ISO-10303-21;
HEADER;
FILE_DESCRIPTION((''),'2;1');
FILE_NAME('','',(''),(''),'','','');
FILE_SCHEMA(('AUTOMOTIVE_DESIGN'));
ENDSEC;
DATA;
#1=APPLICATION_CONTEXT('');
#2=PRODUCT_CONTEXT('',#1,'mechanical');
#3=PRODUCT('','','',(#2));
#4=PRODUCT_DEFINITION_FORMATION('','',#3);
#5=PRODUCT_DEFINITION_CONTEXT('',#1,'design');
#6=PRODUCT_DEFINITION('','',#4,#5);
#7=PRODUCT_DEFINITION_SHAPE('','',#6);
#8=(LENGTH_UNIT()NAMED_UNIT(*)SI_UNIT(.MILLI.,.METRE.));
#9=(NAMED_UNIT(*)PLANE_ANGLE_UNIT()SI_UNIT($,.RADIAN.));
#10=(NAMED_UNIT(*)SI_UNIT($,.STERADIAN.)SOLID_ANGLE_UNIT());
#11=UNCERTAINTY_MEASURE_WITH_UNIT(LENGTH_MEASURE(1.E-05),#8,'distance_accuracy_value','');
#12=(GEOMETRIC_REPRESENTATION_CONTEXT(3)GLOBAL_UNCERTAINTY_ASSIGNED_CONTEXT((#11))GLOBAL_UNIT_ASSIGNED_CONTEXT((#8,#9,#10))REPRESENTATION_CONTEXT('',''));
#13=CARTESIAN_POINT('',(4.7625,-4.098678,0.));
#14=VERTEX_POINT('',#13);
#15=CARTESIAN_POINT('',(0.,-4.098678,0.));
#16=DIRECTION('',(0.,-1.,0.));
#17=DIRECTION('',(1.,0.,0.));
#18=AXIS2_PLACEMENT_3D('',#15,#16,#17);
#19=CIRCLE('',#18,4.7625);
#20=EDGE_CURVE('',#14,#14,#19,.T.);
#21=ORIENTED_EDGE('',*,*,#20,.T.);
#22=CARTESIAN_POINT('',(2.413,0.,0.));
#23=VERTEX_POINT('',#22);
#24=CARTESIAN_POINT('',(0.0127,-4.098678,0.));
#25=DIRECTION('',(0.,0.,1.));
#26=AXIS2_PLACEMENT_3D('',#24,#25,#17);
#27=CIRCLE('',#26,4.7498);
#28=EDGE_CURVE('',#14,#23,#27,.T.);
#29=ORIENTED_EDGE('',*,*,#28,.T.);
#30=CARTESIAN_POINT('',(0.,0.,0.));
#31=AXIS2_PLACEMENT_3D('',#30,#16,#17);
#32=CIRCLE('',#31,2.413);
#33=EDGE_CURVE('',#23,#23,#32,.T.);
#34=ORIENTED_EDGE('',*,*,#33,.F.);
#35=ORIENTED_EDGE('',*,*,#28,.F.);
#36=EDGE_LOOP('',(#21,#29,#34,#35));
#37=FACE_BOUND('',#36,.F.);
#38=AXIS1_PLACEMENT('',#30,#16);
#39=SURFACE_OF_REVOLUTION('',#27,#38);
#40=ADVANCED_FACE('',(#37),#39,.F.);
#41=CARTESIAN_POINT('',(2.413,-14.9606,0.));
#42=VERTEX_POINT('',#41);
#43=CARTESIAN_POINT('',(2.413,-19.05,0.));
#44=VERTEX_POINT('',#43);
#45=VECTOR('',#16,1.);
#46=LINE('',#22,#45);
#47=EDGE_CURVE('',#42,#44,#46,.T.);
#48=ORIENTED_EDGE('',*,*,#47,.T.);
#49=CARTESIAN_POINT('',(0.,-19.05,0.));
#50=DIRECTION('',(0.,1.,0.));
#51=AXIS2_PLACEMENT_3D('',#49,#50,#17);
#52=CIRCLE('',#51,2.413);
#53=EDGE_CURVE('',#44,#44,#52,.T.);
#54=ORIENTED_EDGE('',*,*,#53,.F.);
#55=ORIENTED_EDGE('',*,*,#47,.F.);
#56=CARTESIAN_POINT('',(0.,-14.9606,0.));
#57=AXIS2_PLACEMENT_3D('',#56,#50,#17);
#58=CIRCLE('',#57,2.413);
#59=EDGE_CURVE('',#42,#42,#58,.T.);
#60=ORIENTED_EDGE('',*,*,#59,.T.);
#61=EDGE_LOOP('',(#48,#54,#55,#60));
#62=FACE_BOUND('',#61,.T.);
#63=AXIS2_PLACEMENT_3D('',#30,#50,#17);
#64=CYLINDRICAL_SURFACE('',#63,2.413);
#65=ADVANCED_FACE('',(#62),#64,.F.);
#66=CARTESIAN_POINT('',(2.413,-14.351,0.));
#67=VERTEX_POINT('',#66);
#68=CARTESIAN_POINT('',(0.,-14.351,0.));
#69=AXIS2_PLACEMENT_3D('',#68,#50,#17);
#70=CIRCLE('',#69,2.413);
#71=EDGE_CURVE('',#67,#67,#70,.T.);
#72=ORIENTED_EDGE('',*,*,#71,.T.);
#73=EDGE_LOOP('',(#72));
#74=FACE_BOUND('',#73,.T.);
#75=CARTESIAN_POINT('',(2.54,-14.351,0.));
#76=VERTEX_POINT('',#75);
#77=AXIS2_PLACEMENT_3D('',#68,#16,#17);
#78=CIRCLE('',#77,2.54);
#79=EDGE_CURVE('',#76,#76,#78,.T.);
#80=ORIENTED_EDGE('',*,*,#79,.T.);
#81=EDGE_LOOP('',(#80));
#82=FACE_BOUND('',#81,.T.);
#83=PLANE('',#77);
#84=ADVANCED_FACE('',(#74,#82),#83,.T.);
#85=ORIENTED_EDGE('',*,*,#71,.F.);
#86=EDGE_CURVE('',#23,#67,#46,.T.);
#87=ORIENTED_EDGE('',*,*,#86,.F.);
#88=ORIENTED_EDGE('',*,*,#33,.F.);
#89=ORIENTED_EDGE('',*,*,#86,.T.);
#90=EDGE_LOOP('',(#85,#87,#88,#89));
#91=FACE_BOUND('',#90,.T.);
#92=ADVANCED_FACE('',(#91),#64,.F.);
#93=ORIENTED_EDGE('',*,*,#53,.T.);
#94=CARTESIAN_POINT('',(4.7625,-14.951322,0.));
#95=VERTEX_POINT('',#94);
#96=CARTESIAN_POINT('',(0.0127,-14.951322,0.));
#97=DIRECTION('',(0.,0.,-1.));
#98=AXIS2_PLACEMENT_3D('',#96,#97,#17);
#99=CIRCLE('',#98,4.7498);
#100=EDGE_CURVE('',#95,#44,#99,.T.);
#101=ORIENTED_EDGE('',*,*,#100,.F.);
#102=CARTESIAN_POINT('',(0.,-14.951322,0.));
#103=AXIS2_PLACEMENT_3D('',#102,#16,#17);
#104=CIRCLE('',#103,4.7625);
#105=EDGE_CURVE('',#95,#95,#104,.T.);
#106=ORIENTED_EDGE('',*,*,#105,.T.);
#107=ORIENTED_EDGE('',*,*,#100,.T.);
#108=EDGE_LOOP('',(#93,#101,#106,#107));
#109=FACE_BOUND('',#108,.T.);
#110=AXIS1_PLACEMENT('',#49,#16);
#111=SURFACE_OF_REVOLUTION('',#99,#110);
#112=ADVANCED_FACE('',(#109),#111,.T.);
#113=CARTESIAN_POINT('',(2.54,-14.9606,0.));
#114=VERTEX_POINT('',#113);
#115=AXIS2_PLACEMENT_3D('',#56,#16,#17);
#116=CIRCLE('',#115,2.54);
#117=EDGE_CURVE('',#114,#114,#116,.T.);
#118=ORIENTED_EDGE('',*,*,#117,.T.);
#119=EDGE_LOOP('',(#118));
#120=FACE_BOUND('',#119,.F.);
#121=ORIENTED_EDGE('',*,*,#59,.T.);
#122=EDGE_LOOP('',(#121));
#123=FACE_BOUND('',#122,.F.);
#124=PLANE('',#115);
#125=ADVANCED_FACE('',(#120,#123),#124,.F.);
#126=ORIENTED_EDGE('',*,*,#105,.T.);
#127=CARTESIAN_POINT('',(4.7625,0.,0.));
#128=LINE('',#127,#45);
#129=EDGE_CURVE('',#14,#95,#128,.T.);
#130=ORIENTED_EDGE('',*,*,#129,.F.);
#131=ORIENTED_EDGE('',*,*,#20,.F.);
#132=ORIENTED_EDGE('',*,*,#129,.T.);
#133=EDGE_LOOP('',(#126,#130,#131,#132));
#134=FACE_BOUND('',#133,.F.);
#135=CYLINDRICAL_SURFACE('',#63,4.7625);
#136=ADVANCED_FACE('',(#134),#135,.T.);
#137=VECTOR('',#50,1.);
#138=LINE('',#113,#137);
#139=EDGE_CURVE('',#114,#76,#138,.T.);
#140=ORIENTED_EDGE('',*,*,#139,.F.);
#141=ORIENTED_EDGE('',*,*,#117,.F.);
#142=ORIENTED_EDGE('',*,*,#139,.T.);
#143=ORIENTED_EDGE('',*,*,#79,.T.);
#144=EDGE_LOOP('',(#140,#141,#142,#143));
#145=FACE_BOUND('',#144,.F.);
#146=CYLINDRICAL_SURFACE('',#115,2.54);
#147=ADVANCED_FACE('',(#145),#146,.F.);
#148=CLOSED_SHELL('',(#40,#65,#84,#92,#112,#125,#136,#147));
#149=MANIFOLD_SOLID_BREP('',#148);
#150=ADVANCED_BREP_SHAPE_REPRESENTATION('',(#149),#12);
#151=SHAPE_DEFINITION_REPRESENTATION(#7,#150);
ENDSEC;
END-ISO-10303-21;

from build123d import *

# Parameters (mm, degrees)
F0_R     = 4.7625
F1_DEPTH = 19.05
F4_R     = 2.413
F5_DEPTH = 19.051
F8_R     = 2.54
F9_DEPTH = 0.6096


# Not quite as in the source:
# - a fillet or chamfer that OpenCascade refuses, or shapes differently, is made with other operations: its cross-section is extruded or revolved along the edge and cut away or added


with BuildPart() as f1:
    # F0 (on Front) → F1 (new body)
    with BuildSketch(Plane.XZ):
        Circle(F0_R)
    extrude(amount=F1_DEPTH)

    # F4 (on face) → F5 (cut, through all)
    with BuildSketch(Plane.XZ):
        Circle(F4_R)
    extrude(amount=F5_DEPTH, mode=Mode.SUBTRACT)

    # F6: fillet of radius 4.7498 on 2 edges, made by hand

    # F6_s1 → F6_t2 (revolve, cut)
    with BuildSketch(Plane.XY):
        with BuildLine():
            ThreePointArc((4.7625, -4.0986778295), (4.1334732879, -1.7365119695), (2.413, 0))
            Line((2.413, 0), (4.7625, 0))
            Line((4.7625, 0), (4.7625, -4.0986778295))
        make_face()
    revolve(axis=Axis((0, 0, 0), (0, -1, 0)), mode=Mode.SUBTRACT)

    # F6_s3 → F6_t4 (revolve, cut)
    with BuildSketch(Plane.XY):
        with BuildLine():
            ThreePointArc((4.7625, -14.9513221705), (4.1334732879, -17.3134880305), (2.413, -19.05))
            Line((2.413, -19.05), (4.7625, -19.05))
            Line((4.7625, -19.05), (4.7625, -14.9513221705))
        make_face()
    revolve(axis=Axis((0, -19.05, 0), (0, -1, 0)), mode=Mode.SUBTRACT)

    # F8 (on offset) → F9 (cut)
    with BuildSketch(Plane.XZ.offset(14.9606)):
        Circle(F8_R)
    extrude(amount=-F9_DEPTH, mode=Mode.SUBTRACT)


solid = f1.part
